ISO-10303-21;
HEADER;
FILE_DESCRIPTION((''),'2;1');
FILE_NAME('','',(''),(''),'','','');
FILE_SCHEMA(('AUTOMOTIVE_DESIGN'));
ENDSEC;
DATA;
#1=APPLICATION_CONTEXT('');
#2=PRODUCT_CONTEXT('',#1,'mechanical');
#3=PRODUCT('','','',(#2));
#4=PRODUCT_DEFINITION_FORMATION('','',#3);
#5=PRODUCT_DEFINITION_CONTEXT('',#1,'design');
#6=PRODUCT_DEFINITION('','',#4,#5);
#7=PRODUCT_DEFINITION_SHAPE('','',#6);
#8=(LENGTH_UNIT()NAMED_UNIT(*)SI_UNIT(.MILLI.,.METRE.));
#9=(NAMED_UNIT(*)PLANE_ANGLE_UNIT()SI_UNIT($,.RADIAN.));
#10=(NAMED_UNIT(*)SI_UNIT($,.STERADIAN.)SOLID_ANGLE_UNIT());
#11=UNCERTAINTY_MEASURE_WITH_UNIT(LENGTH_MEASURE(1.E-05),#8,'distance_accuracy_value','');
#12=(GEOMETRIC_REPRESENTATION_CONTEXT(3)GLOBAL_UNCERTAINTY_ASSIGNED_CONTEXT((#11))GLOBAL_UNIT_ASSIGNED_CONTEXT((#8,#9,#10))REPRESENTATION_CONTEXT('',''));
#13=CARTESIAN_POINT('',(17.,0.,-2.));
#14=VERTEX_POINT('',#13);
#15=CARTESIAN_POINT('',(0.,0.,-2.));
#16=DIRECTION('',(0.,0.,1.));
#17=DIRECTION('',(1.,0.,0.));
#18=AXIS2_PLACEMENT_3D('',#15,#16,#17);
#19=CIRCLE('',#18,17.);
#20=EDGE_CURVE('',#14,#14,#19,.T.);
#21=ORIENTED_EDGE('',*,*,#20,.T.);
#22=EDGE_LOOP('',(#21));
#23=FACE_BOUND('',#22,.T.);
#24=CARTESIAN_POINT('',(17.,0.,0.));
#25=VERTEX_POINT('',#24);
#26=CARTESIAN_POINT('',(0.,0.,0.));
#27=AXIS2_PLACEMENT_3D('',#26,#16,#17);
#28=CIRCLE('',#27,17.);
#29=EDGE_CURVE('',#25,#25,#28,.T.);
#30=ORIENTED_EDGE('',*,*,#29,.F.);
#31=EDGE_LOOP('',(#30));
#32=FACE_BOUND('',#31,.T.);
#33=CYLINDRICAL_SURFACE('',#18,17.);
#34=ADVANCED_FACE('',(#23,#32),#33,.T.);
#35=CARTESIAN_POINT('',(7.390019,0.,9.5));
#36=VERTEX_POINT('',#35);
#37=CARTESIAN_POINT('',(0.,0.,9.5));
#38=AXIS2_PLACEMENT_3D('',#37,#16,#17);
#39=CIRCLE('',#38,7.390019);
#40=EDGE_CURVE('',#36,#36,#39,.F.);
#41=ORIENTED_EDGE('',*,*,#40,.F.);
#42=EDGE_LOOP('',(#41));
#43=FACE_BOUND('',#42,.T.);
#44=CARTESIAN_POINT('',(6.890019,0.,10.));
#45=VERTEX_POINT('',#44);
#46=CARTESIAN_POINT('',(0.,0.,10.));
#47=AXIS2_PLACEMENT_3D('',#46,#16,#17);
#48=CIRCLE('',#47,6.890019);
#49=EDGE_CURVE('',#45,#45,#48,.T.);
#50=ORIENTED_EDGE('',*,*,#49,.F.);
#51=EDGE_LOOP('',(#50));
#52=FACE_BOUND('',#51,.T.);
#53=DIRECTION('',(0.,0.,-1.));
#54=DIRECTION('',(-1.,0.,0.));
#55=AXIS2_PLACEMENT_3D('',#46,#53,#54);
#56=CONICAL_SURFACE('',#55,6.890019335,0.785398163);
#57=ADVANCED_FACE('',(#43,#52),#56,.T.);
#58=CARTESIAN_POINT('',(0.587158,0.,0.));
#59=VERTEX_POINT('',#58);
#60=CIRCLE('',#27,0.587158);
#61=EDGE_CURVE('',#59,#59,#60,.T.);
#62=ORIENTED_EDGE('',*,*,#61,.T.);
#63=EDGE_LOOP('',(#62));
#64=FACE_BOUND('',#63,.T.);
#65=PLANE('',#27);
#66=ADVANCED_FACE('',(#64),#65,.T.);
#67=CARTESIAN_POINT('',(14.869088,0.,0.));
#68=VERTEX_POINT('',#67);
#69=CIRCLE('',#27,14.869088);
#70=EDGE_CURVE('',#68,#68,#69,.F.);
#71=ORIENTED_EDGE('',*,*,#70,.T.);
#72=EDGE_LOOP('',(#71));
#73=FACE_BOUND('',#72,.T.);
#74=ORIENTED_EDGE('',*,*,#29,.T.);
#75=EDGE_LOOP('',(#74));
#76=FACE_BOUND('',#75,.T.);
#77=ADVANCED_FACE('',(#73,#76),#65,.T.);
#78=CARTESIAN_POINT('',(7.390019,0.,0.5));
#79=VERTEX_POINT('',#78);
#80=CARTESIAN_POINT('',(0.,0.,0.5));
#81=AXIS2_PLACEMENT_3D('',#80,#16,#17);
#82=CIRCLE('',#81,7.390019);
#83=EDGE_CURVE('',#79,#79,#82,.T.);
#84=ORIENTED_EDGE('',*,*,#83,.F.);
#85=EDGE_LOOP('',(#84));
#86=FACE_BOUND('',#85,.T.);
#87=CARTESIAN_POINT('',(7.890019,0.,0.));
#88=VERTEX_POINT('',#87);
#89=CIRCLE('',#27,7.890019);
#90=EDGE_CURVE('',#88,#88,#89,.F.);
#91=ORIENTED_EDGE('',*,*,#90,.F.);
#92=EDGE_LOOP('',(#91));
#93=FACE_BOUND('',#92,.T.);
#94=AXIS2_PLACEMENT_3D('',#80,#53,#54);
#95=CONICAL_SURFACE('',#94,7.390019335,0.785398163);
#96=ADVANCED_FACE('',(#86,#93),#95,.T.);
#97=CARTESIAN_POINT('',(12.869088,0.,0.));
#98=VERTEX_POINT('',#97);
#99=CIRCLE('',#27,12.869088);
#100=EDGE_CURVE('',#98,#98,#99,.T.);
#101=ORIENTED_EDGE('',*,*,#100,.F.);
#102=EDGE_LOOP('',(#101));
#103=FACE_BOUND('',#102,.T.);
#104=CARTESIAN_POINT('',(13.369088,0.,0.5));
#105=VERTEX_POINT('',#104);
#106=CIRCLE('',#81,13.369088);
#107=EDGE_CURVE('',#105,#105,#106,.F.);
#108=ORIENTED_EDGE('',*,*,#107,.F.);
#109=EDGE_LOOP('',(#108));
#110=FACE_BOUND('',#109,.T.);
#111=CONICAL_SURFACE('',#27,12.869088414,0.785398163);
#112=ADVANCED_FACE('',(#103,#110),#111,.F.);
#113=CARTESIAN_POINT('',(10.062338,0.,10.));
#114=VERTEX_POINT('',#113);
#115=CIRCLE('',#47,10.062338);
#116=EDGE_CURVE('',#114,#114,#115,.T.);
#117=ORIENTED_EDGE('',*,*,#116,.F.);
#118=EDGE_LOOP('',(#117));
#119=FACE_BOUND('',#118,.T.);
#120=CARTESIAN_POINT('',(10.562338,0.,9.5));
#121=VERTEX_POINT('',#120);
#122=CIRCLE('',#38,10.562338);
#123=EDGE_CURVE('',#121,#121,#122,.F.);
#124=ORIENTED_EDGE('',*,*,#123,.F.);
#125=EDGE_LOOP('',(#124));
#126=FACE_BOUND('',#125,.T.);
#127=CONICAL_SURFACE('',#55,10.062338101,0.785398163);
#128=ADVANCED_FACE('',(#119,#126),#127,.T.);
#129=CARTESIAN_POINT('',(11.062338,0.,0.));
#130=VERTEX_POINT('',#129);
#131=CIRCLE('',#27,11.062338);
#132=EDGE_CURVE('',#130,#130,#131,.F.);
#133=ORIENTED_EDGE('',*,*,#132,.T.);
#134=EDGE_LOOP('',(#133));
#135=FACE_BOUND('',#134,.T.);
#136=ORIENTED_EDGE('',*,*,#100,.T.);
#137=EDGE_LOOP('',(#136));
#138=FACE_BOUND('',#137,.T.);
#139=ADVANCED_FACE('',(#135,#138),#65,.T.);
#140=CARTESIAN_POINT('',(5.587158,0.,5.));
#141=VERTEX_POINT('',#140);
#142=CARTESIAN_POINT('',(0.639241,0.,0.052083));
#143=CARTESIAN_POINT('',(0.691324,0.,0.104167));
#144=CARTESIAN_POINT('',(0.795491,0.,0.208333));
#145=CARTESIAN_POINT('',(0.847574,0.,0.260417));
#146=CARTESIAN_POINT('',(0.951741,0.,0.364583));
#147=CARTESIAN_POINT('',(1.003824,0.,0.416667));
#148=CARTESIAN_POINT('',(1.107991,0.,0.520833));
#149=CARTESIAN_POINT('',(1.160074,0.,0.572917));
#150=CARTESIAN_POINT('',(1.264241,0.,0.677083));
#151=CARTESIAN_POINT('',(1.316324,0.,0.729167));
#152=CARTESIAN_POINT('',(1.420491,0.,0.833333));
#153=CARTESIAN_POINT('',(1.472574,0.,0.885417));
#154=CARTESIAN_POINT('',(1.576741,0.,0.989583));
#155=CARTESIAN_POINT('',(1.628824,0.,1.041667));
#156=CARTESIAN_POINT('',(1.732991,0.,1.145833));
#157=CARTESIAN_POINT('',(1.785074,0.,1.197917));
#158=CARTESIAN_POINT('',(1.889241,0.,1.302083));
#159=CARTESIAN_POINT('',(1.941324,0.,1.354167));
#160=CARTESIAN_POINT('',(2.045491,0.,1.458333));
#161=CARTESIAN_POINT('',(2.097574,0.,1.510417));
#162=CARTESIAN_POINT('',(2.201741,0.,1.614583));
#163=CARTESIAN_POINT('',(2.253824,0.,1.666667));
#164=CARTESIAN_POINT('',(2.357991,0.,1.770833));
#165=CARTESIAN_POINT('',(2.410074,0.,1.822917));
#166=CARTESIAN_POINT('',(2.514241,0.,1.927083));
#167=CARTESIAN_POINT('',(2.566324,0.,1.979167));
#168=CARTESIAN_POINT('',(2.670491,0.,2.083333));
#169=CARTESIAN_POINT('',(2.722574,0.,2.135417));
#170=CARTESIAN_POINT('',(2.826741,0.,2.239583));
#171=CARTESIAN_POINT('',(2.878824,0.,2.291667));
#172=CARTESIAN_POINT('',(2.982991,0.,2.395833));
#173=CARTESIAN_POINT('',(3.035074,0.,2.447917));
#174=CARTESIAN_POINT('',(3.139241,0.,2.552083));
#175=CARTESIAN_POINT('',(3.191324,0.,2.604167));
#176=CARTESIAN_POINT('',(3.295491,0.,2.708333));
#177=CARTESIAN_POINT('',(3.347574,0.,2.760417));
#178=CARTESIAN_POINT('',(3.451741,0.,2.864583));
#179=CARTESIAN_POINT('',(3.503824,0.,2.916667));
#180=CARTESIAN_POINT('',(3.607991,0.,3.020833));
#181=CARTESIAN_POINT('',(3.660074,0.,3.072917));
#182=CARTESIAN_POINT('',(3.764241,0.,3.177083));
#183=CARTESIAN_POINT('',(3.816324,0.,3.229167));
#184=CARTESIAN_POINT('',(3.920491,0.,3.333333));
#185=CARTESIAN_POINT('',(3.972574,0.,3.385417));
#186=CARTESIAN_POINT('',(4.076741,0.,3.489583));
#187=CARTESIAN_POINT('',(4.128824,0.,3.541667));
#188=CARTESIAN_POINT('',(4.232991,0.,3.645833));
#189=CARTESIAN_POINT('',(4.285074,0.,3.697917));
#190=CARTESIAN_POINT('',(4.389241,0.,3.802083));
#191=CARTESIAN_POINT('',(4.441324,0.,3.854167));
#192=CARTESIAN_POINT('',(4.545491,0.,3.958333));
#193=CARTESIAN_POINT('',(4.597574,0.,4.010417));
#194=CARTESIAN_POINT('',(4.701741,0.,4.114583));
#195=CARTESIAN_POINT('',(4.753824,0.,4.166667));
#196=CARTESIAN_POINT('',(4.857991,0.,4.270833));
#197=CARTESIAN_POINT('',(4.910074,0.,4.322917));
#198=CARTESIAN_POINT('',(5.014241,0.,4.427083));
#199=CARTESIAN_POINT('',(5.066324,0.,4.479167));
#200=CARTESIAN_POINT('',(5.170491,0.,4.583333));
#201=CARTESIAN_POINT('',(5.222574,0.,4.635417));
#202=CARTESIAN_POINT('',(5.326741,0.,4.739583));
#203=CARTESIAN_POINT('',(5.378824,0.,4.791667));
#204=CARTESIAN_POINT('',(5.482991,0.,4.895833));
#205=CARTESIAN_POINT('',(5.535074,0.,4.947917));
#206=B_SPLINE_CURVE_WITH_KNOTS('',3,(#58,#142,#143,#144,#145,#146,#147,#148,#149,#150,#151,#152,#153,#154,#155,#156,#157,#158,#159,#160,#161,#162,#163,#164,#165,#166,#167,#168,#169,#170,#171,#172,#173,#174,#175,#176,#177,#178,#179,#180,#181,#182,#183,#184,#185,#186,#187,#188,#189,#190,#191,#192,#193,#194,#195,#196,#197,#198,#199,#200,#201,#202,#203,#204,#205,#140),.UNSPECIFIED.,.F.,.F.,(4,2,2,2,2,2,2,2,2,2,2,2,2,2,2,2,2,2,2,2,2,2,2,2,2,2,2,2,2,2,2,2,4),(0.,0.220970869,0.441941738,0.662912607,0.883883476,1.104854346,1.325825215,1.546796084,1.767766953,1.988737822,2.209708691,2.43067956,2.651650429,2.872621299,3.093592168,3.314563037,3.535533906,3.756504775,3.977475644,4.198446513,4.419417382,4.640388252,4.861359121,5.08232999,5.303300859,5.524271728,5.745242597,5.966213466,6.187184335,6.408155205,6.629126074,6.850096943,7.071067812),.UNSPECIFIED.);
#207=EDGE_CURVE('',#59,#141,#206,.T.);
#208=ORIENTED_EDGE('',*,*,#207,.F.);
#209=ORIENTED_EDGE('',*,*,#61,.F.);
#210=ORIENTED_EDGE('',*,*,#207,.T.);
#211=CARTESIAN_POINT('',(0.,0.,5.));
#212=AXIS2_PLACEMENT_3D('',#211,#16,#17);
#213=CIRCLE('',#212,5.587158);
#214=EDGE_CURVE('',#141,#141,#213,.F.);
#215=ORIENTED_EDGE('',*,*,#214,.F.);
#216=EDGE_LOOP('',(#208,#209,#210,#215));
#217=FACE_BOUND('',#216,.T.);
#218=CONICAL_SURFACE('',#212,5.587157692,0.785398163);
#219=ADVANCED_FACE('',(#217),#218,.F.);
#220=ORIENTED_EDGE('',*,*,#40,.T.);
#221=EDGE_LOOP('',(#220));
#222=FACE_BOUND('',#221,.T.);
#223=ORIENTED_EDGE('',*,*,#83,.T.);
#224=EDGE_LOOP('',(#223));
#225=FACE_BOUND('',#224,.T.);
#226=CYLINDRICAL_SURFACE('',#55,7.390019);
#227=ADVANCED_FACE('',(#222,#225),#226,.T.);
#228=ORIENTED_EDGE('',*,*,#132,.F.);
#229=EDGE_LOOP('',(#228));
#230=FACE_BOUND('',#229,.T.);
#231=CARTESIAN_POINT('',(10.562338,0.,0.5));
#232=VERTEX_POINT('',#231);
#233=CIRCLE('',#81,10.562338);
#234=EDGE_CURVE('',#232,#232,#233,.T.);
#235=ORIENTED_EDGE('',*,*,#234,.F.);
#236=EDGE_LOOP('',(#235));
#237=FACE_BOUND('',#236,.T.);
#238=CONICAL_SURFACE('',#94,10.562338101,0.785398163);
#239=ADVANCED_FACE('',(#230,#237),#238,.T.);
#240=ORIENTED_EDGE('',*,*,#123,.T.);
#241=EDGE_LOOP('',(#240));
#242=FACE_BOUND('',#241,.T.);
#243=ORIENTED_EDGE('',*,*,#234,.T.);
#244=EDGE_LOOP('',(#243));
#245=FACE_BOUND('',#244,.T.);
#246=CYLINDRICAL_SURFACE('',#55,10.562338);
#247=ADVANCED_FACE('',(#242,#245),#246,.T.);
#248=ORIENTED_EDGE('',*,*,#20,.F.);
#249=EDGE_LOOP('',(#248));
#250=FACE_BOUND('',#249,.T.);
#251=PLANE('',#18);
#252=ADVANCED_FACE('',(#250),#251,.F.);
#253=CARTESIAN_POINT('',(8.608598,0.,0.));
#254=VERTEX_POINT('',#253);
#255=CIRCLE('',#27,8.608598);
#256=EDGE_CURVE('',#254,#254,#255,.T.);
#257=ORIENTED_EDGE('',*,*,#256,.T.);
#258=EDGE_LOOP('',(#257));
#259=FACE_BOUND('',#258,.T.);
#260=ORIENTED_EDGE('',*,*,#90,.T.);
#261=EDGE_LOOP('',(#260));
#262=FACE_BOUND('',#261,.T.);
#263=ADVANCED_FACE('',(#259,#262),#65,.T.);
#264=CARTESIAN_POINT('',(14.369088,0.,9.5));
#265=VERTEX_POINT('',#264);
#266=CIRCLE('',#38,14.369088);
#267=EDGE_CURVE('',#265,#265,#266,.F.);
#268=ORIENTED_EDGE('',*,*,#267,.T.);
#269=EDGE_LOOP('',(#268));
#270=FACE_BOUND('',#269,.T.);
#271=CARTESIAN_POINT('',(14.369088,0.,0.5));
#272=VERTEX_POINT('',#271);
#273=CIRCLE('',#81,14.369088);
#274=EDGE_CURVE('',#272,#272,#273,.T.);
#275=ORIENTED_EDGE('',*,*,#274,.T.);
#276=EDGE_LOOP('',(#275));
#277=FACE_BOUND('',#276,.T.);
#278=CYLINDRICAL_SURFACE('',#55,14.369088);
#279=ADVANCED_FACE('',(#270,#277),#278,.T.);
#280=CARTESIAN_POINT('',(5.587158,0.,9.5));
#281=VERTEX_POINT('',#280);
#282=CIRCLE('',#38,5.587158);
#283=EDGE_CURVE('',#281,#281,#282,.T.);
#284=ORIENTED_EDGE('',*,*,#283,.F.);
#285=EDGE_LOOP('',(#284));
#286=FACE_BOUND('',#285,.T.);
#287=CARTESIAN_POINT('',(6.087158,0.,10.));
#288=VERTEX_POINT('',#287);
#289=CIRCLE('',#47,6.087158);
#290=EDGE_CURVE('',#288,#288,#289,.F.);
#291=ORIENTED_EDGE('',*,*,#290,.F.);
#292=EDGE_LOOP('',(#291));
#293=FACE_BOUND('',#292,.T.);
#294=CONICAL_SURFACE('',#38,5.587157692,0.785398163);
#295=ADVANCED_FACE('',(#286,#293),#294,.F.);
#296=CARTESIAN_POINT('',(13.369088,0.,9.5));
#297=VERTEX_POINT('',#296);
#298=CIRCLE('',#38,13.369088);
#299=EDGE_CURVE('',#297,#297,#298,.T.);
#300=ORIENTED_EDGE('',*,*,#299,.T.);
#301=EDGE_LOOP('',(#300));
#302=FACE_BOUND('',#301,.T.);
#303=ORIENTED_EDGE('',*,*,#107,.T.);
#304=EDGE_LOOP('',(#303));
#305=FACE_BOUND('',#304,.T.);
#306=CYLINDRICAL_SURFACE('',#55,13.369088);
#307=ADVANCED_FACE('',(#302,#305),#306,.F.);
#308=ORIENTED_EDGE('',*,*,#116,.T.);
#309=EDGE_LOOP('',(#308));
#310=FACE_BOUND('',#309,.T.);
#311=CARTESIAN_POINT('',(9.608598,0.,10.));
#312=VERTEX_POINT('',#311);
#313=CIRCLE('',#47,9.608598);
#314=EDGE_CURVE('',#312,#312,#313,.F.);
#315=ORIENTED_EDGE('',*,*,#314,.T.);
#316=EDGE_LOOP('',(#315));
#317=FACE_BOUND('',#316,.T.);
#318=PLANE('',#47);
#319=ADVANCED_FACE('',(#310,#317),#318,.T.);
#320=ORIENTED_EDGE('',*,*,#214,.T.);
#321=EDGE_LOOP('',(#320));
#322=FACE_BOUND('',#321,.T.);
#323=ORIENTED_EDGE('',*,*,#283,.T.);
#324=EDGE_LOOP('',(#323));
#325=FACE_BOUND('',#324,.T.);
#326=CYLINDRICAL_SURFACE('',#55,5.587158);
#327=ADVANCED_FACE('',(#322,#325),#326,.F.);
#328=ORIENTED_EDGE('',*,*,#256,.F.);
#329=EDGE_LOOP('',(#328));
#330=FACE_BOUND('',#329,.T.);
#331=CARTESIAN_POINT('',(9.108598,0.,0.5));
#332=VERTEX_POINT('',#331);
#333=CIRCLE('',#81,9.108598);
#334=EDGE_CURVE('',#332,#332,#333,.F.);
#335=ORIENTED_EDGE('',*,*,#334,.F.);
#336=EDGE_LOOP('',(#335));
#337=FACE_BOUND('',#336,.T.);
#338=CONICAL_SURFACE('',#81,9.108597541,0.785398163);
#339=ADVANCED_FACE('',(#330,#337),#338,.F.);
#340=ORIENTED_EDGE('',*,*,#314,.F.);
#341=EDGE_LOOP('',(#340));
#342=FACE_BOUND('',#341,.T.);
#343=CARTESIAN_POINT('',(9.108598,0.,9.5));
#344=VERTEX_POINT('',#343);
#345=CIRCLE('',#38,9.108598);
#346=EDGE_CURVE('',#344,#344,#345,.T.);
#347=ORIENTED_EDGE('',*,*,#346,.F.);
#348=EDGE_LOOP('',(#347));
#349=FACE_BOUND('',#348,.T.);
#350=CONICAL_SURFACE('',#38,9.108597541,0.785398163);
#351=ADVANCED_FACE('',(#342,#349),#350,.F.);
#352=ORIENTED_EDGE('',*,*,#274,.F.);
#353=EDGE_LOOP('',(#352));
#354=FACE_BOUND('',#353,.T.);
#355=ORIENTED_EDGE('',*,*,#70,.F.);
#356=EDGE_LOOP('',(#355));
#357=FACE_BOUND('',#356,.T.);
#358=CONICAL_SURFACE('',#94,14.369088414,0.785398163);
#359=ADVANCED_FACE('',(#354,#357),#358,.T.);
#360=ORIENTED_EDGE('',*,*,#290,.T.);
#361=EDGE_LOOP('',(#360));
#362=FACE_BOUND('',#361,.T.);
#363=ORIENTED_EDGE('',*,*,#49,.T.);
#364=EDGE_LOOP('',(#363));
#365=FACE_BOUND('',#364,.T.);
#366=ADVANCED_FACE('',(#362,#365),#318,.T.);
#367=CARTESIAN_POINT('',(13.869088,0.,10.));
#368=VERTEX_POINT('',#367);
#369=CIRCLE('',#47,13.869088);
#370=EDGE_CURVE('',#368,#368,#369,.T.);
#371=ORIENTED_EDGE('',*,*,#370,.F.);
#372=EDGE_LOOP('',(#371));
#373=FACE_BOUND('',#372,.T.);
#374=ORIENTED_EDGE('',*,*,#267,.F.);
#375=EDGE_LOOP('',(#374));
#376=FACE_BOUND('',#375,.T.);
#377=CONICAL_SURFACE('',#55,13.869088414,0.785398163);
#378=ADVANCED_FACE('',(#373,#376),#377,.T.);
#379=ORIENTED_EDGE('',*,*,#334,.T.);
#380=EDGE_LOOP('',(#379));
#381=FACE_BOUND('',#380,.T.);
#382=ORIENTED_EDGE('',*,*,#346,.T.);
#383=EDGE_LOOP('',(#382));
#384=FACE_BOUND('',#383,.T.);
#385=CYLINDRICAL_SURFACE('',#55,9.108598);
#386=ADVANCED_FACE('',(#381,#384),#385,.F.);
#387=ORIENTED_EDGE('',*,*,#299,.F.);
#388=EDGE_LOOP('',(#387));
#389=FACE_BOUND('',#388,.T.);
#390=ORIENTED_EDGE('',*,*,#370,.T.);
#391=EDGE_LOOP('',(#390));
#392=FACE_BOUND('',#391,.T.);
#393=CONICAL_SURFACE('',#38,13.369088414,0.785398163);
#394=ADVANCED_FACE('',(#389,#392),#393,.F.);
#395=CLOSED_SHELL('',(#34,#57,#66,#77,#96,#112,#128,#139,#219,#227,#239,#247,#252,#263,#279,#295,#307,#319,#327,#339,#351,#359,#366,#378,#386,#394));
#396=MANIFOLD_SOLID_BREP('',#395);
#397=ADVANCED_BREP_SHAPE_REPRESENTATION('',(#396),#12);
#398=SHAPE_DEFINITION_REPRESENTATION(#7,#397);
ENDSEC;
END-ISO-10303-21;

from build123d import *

# Parameters (mm, degrees)
SKETCH1_R           = 17
SKETCH1_R_2         = 15.796210214
SKETCH1_R_3         = 14.369088414
SKETCH1_R_4         = 13.369088414
SKETCH1_R_5         = 10.562338101
SKETCH1_R_6         = 9.108597541
SKETCH1_R_7         = 7.390019335
SKETCH1_R_8         = 5.587157692
BOSS_EXTRUDE1_DEPTH = 2
SKETCH1_3_R         = 14.369088414
SKETCH1_3_R_2       = 13.369088414
SKETCH1_3_R_3       = 10.562338101
SKETCH1_3_R_4       = 9.108597541
SKETCH1_3_R_5       = 7.390019335
SKETCH1_3_R_6       = 5.587157692
BOSS_EXTRUDE2_DEPTH = 10
CHAMFER3_SIZE       = 5
CHAMFER4_SIZE       = 0.5
CHAMFER5_SIZE       = 0.5


with BuildPart() as part:
    # Sketch1 → Boss-Extrude1 (new body)
    # profile 1 of 8: a face of its own
    with BuildSketch(Plane.XY):
        Circle(SKETCH1_R)
        Circle(SKETCH1_R_2, mode=Mode.SUBTRACT)
    # profile 2 of 8: a face of its own
    with BuildSketch(Plane.XY):
        Circle(SKETCH1_R_2)
        Circle(SKETCH1_R_3, mode=Mode.SUBTRACT)
    # profile 3 of 8: a face of its own
    with BuildSketch(Plane.XY):
        Circle(SKETCH1_R_3)
        Circle(SKETCH1_R_4, mode=Mode.SUBTRACT)
    # profile 4 of 8: a face of its own
    with BuildSketch(Plane.XY):
        Circle(SKETCH1_R_4)
        Circle(SKETCH1_R_5, mode=Mode.SUBTRACT)
    # profile 5 of 8: a face of its own
    with BuildSketch(Plane.XY):
        Circle(SKETCH1_R_5)
        Circle(SKETCH1_R_6, mode=Mode.SUBTRACT)
    # profile 6 of 8: a face of its own
    with BuildSketch(Plane.XY):
        Circle(SKETCH1_R_6)
        Circle(SKETCH1_R_7, mode=Mode.SUBTRACT)
    # profile 7 of 8: a face of its own
    with BuildSketch(Plane.XY):
        Circle(SKETCH1_R_7)
        Circle(SKETCH1_R_8, mode=Mode.SUBTRACT)
    # profile 8 of 8: a face of its own
    with BuildSketch(Plane.XY):
        Circle(SKETCH1_R_8)
    extrude(amount=-BOSS_EXTRUDE1_DEPTH)

    # Sketch1<3> → Boss-Extrude2 (add)
    # profile 1 of 3: a face of its own
    with BuildSketch(Plane.XY):
        Circle(SKETCH1_3_R)
        Circle(SKETCH1_3_R_2, mode=Mode.SUBTRACT)
    # profile 2 of 3: a face of its own
    with BuildSketch(Plane.XY):
        Circle(SKETCH1_3_R_3)
        Circle(SKETCH1_3_R_4, mode=Mode.SUBTRACT)
    # profile 3 of 3: a face of its own
    with BuildSketch(Plane.XY):
        Circle(SKETCH1_3_R_5)
        Circle(SKETCH1_3_R_6, mode=Mode.SUBTRACT)
    extrude(amount=BOSS_EXTRUDE2_DEPTH)

    # Chamfer3
    chamfer3_edges = [part.edges().sort_by_distance(p)[0] for p in [
        (-5.587157692, 0, 0),
    ]]
    chamfer(chamfer3_edges, length=CHAMFER3_SIZE)

    # Chamfer4
    chamfer4_edges = [part.edges().sort_by_distance(p)[0] for p in [
        (-9.108597541, 0, 0),
        (-10.562338101, 0, 0),
        (-7.390019335, 0, 0),
        (-14.369088414, 0, 0),
        (-13.369088414, 0, 0),
    ]]
    chamfer(chamfer4_edges, length=CHAMFER4_SIZE)

    # Chamfer5
    chamfer5_edges = [part.edges().sort_by_distance(p)[0] for p in [
        (-9.108597541, 0, 10),
        (-10.562338101, 0, 10),
        (-5.587157692, 0, 10),
        (-7.390019335, 0, 10),
        (-13.369088414, 0, 10),
        (-14.369088414, 0, 10),
    ]]
    chamfer(chamfer5_edges, length=CHAMFER5_SIZE - 0.0001)  # a hair under: the kernel refuses the full size


solid = part.part
